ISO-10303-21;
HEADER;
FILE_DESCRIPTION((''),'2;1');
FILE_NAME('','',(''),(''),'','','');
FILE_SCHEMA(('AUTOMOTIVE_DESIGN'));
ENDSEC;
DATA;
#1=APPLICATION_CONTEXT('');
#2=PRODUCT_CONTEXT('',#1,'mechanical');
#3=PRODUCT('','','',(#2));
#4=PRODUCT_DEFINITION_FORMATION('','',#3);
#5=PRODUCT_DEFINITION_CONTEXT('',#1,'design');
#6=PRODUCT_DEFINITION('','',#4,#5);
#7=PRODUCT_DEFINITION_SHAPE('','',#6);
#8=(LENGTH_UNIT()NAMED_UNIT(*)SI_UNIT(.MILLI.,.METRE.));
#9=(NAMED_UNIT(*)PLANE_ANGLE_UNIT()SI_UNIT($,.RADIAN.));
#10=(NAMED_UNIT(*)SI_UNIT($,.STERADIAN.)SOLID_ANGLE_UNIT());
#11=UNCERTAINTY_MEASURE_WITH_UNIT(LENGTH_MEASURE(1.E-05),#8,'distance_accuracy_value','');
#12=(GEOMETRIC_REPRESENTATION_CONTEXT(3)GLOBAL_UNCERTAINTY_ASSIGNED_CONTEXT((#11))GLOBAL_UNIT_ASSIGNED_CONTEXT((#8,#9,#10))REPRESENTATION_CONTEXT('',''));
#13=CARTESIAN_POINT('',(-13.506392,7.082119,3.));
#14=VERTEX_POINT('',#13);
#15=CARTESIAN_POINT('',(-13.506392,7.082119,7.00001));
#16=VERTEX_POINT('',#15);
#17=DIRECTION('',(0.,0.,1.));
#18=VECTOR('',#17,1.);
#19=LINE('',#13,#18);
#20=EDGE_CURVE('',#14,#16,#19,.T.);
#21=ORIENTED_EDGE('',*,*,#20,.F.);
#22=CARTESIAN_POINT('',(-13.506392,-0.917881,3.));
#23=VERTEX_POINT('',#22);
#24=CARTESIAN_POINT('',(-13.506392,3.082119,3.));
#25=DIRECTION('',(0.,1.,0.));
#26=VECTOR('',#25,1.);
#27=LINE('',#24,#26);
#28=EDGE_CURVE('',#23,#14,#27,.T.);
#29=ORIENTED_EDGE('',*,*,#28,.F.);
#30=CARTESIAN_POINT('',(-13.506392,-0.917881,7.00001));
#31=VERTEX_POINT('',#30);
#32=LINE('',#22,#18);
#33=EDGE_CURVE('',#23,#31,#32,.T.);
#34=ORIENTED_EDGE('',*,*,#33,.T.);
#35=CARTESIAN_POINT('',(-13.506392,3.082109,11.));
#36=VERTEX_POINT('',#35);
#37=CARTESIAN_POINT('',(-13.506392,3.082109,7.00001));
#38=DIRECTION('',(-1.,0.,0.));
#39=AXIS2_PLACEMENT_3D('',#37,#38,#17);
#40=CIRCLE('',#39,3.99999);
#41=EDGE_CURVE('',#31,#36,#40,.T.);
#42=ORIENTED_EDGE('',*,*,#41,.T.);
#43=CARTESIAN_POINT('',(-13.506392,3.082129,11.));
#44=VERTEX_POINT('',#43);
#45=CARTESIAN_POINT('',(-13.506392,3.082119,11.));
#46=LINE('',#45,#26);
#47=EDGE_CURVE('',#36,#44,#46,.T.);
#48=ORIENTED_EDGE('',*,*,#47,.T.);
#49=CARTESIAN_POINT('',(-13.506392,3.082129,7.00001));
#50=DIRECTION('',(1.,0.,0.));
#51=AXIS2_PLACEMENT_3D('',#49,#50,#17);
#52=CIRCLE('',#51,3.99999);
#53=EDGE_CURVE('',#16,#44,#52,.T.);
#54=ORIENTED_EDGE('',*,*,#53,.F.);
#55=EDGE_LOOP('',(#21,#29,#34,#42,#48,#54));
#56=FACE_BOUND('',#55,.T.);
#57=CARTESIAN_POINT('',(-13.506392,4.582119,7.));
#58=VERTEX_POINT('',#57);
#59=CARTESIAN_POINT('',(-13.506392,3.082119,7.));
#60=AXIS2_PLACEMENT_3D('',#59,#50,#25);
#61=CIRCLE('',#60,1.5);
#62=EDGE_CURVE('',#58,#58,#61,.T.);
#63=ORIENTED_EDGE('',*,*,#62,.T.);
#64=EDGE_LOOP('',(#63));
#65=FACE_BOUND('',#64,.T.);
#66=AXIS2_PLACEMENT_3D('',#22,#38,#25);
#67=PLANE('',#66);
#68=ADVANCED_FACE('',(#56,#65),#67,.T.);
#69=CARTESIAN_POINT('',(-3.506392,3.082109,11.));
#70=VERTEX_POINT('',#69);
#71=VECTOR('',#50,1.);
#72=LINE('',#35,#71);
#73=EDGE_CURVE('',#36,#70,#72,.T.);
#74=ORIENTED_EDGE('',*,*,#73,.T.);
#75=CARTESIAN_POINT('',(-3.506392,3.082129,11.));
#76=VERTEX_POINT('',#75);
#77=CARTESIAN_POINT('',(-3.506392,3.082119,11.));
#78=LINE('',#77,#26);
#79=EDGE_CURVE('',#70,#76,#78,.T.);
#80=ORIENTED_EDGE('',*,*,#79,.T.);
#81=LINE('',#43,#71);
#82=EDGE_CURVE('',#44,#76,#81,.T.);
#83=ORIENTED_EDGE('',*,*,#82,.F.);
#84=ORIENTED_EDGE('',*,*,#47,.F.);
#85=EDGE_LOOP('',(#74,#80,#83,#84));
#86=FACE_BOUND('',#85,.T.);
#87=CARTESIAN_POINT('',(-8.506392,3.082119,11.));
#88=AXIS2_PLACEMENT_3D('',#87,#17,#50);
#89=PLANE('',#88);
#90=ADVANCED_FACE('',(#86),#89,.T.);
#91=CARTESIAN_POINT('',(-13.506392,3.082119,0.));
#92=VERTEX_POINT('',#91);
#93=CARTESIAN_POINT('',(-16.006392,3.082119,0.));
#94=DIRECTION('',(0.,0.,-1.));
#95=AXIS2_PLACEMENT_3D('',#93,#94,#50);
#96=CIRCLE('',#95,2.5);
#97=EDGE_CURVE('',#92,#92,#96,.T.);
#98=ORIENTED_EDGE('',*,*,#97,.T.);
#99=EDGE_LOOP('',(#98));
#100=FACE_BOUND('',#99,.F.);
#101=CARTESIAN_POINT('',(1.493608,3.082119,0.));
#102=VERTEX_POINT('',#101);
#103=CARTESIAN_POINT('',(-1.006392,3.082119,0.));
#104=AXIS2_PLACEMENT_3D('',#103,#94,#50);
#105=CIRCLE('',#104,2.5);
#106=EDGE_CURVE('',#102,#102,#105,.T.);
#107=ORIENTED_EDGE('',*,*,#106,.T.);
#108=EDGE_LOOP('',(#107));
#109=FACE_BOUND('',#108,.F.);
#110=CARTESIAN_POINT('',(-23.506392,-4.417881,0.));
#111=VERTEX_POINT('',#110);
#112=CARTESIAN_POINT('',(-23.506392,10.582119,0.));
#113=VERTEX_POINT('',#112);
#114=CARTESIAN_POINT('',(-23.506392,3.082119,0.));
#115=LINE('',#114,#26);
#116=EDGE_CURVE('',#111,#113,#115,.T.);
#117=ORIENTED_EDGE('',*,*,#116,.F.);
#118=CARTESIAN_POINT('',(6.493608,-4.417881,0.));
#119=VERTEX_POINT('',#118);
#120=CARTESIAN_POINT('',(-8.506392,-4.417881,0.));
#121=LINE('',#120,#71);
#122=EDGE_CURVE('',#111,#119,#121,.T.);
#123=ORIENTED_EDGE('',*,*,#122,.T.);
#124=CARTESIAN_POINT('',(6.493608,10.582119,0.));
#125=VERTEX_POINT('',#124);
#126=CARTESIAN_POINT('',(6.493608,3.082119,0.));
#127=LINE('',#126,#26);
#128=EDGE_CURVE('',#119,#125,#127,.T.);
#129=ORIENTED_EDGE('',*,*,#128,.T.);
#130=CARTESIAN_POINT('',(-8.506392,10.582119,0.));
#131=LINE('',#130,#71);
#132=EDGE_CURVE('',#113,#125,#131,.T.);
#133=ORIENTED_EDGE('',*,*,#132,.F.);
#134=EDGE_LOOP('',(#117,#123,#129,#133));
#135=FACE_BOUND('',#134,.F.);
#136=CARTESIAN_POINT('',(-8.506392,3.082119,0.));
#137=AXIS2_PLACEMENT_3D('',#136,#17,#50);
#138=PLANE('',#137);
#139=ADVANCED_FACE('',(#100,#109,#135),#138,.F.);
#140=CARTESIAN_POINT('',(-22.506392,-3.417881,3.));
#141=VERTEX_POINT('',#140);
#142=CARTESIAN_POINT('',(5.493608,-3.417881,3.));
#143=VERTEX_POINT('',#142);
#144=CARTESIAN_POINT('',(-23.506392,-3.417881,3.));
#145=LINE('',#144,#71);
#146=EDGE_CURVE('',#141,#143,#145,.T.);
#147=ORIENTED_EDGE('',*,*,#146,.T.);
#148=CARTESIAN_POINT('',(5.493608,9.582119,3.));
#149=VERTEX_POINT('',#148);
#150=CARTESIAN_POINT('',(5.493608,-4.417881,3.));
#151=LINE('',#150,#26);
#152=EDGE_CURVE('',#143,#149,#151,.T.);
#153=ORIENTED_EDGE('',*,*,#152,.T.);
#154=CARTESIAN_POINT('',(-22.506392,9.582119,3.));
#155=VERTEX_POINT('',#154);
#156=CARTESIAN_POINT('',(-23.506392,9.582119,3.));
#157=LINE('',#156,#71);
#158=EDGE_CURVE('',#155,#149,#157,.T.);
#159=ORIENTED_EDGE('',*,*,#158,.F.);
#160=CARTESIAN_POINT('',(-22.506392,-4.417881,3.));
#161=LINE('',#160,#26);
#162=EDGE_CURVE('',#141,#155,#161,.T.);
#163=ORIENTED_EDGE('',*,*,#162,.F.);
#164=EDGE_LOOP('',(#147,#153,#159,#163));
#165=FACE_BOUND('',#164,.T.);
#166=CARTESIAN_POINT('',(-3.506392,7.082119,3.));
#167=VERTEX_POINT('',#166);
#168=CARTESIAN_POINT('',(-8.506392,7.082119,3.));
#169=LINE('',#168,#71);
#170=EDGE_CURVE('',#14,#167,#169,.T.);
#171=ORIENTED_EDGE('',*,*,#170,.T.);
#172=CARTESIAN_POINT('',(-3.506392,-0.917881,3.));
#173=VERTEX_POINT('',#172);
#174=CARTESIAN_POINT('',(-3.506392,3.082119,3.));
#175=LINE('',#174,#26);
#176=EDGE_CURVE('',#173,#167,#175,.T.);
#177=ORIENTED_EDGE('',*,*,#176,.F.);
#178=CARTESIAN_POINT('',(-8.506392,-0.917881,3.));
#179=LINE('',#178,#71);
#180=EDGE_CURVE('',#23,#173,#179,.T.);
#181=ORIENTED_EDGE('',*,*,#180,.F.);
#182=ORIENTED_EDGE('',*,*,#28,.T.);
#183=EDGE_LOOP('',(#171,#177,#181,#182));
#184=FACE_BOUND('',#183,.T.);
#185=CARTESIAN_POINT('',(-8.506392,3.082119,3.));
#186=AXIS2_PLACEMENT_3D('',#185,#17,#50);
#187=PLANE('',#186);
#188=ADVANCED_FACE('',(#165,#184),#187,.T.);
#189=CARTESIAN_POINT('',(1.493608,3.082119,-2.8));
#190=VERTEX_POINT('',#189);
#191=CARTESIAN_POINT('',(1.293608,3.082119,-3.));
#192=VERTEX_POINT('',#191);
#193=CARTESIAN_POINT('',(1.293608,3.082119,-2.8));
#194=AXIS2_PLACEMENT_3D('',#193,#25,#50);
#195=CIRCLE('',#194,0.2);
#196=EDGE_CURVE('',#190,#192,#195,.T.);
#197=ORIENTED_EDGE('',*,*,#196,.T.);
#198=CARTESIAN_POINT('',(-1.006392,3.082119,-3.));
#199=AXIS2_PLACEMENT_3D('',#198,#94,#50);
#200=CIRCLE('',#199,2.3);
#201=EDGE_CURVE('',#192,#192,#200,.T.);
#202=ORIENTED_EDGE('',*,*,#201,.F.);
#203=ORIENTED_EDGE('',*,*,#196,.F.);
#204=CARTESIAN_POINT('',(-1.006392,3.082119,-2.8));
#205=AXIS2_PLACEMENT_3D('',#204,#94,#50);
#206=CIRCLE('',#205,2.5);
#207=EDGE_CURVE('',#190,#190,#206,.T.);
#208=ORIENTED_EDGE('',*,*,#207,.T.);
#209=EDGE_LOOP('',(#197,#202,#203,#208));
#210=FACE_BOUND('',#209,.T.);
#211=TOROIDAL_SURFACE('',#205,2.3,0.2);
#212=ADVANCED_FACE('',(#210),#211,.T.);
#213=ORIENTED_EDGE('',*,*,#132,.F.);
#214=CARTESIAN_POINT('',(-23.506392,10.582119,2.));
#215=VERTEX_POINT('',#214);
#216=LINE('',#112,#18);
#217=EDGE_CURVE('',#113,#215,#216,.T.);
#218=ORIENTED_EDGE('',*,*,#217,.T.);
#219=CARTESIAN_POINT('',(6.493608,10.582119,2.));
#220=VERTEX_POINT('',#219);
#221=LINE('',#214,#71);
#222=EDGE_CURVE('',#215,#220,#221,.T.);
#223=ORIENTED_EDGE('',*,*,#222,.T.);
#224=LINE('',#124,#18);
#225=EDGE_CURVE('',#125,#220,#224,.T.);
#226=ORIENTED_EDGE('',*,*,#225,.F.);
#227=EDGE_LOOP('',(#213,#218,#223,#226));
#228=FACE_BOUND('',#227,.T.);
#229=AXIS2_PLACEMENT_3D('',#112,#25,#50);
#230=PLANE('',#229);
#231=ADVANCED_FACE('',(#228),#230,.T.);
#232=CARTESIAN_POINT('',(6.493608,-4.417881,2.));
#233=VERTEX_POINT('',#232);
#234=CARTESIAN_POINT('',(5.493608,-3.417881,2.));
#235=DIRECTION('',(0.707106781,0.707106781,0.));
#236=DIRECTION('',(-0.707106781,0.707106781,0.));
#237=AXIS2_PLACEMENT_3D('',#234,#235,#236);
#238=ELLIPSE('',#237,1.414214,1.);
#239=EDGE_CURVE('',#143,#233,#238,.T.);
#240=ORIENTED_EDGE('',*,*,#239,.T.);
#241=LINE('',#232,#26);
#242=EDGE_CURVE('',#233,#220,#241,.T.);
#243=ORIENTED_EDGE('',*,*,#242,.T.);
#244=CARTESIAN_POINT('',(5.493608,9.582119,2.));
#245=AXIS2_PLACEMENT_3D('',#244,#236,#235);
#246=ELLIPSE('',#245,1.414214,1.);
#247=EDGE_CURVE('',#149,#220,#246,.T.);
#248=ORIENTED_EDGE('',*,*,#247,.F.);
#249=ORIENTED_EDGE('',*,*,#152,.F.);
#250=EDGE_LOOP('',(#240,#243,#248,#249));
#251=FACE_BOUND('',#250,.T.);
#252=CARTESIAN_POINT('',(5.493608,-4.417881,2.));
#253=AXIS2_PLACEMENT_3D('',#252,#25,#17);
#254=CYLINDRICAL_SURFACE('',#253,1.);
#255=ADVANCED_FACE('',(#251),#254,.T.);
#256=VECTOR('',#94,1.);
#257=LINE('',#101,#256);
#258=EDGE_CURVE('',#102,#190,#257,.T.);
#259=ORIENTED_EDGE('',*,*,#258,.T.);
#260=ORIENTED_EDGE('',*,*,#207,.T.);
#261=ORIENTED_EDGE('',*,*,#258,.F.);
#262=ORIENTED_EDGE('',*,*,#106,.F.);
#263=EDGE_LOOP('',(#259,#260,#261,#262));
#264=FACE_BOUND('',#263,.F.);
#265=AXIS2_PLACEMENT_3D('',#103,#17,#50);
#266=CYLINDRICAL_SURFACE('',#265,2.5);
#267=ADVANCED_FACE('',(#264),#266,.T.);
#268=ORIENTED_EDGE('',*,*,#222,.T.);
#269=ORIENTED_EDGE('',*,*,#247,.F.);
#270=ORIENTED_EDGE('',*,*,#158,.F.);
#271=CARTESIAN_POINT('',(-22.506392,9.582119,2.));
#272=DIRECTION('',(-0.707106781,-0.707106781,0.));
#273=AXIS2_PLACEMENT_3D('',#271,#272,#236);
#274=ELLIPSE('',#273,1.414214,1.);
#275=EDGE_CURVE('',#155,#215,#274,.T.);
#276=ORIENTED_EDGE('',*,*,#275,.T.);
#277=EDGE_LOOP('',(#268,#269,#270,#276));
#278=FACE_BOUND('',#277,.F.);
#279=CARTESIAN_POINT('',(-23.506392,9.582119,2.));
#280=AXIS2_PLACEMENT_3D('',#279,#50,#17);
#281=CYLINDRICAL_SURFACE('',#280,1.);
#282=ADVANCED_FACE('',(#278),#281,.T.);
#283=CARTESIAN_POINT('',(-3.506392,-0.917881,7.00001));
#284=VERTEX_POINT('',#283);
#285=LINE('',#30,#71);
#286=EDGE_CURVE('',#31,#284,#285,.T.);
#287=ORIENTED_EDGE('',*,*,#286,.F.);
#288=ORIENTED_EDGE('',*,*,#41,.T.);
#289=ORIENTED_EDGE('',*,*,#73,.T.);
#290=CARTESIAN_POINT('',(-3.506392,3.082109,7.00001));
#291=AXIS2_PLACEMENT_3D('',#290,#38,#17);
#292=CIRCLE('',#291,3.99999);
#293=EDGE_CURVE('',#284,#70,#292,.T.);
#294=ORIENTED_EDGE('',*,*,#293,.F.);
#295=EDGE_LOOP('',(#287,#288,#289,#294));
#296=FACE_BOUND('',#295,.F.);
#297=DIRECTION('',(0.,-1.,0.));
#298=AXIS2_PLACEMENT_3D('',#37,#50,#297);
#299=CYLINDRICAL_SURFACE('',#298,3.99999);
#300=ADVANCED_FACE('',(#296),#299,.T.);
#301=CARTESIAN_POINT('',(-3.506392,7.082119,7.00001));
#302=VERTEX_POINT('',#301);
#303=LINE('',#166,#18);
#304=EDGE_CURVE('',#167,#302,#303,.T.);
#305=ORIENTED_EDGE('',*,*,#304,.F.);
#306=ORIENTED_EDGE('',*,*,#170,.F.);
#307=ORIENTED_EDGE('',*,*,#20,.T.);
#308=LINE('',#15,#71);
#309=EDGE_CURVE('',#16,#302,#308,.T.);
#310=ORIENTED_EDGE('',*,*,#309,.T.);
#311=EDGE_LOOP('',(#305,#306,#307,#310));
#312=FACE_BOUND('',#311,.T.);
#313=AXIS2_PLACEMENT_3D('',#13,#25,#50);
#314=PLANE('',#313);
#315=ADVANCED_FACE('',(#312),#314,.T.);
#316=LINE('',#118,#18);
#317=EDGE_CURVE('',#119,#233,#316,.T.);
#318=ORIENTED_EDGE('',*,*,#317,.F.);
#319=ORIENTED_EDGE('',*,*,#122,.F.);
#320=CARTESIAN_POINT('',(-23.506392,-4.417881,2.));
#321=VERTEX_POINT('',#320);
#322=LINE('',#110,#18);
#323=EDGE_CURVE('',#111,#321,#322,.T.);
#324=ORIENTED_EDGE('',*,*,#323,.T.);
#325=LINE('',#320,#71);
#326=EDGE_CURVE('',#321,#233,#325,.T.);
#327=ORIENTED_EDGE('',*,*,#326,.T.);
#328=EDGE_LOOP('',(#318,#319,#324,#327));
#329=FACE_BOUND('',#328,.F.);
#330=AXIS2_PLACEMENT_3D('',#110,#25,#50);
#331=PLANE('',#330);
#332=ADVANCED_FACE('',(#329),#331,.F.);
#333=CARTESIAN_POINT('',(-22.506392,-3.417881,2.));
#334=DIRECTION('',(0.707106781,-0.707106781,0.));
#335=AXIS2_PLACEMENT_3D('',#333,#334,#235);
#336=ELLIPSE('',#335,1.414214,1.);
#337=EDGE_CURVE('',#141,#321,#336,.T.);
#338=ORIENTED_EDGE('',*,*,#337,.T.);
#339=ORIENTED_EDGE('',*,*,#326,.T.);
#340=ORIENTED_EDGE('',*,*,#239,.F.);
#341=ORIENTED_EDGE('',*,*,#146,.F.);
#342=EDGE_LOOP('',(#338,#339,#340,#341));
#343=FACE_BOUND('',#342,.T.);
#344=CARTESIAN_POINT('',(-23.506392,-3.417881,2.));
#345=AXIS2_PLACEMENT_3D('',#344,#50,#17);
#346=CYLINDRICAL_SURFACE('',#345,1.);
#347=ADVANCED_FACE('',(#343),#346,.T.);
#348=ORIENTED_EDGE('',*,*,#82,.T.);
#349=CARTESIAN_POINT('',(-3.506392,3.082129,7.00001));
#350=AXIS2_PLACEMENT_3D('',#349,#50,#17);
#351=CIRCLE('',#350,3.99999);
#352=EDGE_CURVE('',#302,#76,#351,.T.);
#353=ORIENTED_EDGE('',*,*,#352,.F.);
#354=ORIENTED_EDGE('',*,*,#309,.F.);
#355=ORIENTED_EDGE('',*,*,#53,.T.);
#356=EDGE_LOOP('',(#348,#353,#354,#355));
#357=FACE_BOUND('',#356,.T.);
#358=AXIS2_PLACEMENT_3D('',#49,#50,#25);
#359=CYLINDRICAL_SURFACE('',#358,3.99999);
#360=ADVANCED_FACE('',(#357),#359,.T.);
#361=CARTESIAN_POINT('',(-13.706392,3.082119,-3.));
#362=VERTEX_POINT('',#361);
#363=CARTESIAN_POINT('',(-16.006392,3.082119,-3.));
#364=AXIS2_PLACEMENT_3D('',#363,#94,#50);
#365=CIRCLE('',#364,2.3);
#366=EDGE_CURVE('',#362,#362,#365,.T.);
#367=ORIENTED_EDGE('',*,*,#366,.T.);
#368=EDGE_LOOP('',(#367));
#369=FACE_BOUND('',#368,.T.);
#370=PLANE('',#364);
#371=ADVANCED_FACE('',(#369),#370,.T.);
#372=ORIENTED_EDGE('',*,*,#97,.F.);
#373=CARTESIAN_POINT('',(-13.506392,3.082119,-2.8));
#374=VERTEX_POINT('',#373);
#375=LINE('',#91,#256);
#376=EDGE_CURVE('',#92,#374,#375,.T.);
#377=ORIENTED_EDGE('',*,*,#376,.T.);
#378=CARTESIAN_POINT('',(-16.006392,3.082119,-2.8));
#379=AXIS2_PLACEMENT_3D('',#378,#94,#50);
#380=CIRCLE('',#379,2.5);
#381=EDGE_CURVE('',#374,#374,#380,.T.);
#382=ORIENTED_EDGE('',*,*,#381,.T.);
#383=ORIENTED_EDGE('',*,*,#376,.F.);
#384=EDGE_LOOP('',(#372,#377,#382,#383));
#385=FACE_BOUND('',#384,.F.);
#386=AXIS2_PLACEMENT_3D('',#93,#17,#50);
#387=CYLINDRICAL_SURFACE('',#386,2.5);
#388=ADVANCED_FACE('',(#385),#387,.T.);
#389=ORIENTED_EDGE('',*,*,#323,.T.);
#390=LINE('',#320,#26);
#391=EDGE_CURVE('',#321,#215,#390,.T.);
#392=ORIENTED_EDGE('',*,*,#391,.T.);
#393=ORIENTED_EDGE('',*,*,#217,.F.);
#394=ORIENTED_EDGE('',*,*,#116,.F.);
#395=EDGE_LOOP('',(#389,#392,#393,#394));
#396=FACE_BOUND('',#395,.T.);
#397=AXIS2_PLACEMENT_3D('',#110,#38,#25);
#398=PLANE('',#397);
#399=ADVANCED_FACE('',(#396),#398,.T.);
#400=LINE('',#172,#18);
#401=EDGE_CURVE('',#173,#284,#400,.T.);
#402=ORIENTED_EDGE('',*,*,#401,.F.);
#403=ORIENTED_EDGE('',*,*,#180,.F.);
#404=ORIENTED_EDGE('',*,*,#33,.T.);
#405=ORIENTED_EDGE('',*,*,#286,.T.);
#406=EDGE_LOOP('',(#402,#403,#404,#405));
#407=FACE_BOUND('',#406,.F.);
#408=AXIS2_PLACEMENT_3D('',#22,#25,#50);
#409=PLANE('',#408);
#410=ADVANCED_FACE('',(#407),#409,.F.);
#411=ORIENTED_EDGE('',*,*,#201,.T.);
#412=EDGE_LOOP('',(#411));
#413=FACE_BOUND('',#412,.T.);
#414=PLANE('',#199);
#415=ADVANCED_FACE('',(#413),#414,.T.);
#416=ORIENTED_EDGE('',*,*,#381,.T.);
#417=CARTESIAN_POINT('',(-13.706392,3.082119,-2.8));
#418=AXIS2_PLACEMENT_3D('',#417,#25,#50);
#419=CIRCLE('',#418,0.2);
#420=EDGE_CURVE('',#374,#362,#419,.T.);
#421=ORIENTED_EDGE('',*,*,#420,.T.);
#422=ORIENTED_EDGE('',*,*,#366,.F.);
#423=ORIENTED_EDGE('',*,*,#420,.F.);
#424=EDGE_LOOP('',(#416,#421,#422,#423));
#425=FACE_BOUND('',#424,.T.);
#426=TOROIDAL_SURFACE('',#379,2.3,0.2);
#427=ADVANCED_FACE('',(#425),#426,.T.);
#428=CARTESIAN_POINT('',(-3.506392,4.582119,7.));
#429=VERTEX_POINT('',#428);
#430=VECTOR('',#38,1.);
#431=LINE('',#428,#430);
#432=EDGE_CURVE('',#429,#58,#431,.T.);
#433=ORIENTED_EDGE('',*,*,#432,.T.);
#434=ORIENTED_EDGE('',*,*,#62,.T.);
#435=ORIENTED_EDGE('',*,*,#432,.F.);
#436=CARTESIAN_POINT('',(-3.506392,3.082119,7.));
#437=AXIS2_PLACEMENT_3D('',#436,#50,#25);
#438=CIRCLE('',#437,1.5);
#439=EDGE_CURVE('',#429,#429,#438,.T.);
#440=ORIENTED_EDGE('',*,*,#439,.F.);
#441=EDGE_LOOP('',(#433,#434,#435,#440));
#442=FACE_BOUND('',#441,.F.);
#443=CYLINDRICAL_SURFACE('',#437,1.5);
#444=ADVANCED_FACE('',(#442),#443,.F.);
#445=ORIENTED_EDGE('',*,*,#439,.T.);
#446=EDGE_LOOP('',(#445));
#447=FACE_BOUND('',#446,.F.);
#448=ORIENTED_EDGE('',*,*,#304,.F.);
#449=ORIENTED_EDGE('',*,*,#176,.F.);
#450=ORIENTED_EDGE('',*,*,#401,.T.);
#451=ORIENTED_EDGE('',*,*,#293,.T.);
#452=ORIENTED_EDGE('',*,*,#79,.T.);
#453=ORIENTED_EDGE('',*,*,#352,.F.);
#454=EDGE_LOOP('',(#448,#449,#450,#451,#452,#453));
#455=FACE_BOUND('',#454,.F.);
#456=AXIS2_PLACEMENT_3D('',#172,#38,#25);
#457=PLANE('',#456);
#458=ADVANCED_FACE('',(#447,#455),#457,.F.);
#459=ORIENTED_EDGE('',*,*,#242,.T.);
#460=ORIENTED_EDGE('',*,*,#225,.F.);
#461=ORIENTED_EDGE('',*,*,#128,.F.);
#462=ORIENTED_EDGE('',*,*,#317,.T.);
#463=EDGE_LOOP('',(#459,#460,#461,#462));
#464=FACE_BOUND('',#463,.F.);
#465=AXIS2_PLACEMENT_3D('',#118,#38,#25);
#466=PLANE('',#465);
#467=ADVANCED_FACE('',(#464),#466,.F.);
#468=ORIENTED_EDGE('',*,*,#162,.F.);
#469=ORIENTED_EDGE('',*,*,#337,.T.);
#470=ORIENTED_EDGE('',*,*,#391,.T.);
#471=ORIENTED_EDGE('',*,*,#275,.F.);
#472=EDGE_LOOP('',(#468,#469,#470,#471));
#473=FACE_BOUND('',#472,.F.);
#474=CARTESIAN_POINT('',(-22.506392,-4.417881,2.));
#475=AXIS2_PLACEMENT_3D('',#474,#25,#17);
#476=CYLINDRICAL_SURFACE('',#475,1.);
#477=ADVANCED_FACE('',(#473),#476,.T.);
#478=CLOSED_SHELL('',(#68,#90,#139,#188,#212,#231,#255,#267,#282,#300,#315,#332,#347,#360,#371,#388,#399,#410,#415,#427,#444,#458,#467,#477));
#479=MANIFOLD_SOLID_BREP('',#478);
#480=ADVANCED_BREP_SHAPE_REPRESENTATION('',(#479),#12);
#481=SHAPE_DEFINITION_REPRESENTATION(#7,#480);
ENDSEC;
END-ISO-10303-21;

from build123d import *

# Parameters (mm, degrees)
F0_W     = 30
F0_H     = 15
F1_DEPTH = 3
F2_W     = 10
F2_H     = 8
F3_DEPTH = 8
F4_R     = 3.99999
F5_R     = 1.5
F6_DEPTH = 25
F7_R     = 1
F8_R     = 2.5
F9_DEPTH = 3
F10_R    = 0.2


# Not quite as in the source:
# - a fillet or chamfer is up to 0.001 mm smaller than in the source, because OpenCascade refuses the exact size


with BuildPart() as f1:
    # F0 (on Top) → F1 (new body)
    with BuildSketch(Plane.XY):
        with Locations((-8.5063918959, 3.0821188468)):
            Rectangle(F0_W, F0_H)
    extrude(amount=F1_DEPTH)

    # F2 (on face) → F3 (join)
    with BuildSketch(Plane.XY.offset(3)):
        with Locations((-8.5063918959, 3.0821188468)):
            Rectangle(F2_W, F2_H)
    extrude(amount=F3_DEPTH)

    # F4 (radius 4 in the source; OpenCascade refuses exactly that, so slightly less here)
    f4_edges = [f1.edges().sort_by_distance(p)[0] for p in [
        (-8.506392, -0.917881, 11),
        (-8.506392, 7.082119, 11),
    ]]
    fillet(f4_edges, radius=F4_R)

    # F5 (on face) → F6 (cut)
    with BuildSketch(Plane.YZ.offset(-3.5063918959)):
        with Locations((3.0821188468, 7)):
            Circle(F5_R)
    extrude(amount=-F6_DEPTH, mode=Mode.SUBTRACT)

    # F7
    f7_edges = [f1.edges().sort_by_distance(p)[0] for p in [
        (-23.506392, 3.082119, 3),
        (-8.506392, 10.582119, 3),
        (6.493608, 3.082119, 3),
        (-8.506392, -4.417881, 3),
    ]]
    fillet(f7_edges, radius=F7_R)

    # F8 (on face) → F9 (join)
    with BuildSketch(Plane(origin=(0, 0, 0), x_dir=(1, 0, 0), z_dir=(0, 0, -1))):
        with Locations((-16.0063918959, -3.0821188468)):
            Circle(F8_R)
        with Locations((-1.0063918959, -3.0821188468)):
            Circle(F8_R)
    extrude(amount=F9_DEPTH)

    # F10
    f10_edges = [f1.edges().sort_by_distance(p)[0] for p in [
        (-18.506392, 3.082119, -3),
        (-3.506392, 3.082119, -3),
    ]]
    fillet(f10_edges, radius=F10_R)


solid = f1.part
